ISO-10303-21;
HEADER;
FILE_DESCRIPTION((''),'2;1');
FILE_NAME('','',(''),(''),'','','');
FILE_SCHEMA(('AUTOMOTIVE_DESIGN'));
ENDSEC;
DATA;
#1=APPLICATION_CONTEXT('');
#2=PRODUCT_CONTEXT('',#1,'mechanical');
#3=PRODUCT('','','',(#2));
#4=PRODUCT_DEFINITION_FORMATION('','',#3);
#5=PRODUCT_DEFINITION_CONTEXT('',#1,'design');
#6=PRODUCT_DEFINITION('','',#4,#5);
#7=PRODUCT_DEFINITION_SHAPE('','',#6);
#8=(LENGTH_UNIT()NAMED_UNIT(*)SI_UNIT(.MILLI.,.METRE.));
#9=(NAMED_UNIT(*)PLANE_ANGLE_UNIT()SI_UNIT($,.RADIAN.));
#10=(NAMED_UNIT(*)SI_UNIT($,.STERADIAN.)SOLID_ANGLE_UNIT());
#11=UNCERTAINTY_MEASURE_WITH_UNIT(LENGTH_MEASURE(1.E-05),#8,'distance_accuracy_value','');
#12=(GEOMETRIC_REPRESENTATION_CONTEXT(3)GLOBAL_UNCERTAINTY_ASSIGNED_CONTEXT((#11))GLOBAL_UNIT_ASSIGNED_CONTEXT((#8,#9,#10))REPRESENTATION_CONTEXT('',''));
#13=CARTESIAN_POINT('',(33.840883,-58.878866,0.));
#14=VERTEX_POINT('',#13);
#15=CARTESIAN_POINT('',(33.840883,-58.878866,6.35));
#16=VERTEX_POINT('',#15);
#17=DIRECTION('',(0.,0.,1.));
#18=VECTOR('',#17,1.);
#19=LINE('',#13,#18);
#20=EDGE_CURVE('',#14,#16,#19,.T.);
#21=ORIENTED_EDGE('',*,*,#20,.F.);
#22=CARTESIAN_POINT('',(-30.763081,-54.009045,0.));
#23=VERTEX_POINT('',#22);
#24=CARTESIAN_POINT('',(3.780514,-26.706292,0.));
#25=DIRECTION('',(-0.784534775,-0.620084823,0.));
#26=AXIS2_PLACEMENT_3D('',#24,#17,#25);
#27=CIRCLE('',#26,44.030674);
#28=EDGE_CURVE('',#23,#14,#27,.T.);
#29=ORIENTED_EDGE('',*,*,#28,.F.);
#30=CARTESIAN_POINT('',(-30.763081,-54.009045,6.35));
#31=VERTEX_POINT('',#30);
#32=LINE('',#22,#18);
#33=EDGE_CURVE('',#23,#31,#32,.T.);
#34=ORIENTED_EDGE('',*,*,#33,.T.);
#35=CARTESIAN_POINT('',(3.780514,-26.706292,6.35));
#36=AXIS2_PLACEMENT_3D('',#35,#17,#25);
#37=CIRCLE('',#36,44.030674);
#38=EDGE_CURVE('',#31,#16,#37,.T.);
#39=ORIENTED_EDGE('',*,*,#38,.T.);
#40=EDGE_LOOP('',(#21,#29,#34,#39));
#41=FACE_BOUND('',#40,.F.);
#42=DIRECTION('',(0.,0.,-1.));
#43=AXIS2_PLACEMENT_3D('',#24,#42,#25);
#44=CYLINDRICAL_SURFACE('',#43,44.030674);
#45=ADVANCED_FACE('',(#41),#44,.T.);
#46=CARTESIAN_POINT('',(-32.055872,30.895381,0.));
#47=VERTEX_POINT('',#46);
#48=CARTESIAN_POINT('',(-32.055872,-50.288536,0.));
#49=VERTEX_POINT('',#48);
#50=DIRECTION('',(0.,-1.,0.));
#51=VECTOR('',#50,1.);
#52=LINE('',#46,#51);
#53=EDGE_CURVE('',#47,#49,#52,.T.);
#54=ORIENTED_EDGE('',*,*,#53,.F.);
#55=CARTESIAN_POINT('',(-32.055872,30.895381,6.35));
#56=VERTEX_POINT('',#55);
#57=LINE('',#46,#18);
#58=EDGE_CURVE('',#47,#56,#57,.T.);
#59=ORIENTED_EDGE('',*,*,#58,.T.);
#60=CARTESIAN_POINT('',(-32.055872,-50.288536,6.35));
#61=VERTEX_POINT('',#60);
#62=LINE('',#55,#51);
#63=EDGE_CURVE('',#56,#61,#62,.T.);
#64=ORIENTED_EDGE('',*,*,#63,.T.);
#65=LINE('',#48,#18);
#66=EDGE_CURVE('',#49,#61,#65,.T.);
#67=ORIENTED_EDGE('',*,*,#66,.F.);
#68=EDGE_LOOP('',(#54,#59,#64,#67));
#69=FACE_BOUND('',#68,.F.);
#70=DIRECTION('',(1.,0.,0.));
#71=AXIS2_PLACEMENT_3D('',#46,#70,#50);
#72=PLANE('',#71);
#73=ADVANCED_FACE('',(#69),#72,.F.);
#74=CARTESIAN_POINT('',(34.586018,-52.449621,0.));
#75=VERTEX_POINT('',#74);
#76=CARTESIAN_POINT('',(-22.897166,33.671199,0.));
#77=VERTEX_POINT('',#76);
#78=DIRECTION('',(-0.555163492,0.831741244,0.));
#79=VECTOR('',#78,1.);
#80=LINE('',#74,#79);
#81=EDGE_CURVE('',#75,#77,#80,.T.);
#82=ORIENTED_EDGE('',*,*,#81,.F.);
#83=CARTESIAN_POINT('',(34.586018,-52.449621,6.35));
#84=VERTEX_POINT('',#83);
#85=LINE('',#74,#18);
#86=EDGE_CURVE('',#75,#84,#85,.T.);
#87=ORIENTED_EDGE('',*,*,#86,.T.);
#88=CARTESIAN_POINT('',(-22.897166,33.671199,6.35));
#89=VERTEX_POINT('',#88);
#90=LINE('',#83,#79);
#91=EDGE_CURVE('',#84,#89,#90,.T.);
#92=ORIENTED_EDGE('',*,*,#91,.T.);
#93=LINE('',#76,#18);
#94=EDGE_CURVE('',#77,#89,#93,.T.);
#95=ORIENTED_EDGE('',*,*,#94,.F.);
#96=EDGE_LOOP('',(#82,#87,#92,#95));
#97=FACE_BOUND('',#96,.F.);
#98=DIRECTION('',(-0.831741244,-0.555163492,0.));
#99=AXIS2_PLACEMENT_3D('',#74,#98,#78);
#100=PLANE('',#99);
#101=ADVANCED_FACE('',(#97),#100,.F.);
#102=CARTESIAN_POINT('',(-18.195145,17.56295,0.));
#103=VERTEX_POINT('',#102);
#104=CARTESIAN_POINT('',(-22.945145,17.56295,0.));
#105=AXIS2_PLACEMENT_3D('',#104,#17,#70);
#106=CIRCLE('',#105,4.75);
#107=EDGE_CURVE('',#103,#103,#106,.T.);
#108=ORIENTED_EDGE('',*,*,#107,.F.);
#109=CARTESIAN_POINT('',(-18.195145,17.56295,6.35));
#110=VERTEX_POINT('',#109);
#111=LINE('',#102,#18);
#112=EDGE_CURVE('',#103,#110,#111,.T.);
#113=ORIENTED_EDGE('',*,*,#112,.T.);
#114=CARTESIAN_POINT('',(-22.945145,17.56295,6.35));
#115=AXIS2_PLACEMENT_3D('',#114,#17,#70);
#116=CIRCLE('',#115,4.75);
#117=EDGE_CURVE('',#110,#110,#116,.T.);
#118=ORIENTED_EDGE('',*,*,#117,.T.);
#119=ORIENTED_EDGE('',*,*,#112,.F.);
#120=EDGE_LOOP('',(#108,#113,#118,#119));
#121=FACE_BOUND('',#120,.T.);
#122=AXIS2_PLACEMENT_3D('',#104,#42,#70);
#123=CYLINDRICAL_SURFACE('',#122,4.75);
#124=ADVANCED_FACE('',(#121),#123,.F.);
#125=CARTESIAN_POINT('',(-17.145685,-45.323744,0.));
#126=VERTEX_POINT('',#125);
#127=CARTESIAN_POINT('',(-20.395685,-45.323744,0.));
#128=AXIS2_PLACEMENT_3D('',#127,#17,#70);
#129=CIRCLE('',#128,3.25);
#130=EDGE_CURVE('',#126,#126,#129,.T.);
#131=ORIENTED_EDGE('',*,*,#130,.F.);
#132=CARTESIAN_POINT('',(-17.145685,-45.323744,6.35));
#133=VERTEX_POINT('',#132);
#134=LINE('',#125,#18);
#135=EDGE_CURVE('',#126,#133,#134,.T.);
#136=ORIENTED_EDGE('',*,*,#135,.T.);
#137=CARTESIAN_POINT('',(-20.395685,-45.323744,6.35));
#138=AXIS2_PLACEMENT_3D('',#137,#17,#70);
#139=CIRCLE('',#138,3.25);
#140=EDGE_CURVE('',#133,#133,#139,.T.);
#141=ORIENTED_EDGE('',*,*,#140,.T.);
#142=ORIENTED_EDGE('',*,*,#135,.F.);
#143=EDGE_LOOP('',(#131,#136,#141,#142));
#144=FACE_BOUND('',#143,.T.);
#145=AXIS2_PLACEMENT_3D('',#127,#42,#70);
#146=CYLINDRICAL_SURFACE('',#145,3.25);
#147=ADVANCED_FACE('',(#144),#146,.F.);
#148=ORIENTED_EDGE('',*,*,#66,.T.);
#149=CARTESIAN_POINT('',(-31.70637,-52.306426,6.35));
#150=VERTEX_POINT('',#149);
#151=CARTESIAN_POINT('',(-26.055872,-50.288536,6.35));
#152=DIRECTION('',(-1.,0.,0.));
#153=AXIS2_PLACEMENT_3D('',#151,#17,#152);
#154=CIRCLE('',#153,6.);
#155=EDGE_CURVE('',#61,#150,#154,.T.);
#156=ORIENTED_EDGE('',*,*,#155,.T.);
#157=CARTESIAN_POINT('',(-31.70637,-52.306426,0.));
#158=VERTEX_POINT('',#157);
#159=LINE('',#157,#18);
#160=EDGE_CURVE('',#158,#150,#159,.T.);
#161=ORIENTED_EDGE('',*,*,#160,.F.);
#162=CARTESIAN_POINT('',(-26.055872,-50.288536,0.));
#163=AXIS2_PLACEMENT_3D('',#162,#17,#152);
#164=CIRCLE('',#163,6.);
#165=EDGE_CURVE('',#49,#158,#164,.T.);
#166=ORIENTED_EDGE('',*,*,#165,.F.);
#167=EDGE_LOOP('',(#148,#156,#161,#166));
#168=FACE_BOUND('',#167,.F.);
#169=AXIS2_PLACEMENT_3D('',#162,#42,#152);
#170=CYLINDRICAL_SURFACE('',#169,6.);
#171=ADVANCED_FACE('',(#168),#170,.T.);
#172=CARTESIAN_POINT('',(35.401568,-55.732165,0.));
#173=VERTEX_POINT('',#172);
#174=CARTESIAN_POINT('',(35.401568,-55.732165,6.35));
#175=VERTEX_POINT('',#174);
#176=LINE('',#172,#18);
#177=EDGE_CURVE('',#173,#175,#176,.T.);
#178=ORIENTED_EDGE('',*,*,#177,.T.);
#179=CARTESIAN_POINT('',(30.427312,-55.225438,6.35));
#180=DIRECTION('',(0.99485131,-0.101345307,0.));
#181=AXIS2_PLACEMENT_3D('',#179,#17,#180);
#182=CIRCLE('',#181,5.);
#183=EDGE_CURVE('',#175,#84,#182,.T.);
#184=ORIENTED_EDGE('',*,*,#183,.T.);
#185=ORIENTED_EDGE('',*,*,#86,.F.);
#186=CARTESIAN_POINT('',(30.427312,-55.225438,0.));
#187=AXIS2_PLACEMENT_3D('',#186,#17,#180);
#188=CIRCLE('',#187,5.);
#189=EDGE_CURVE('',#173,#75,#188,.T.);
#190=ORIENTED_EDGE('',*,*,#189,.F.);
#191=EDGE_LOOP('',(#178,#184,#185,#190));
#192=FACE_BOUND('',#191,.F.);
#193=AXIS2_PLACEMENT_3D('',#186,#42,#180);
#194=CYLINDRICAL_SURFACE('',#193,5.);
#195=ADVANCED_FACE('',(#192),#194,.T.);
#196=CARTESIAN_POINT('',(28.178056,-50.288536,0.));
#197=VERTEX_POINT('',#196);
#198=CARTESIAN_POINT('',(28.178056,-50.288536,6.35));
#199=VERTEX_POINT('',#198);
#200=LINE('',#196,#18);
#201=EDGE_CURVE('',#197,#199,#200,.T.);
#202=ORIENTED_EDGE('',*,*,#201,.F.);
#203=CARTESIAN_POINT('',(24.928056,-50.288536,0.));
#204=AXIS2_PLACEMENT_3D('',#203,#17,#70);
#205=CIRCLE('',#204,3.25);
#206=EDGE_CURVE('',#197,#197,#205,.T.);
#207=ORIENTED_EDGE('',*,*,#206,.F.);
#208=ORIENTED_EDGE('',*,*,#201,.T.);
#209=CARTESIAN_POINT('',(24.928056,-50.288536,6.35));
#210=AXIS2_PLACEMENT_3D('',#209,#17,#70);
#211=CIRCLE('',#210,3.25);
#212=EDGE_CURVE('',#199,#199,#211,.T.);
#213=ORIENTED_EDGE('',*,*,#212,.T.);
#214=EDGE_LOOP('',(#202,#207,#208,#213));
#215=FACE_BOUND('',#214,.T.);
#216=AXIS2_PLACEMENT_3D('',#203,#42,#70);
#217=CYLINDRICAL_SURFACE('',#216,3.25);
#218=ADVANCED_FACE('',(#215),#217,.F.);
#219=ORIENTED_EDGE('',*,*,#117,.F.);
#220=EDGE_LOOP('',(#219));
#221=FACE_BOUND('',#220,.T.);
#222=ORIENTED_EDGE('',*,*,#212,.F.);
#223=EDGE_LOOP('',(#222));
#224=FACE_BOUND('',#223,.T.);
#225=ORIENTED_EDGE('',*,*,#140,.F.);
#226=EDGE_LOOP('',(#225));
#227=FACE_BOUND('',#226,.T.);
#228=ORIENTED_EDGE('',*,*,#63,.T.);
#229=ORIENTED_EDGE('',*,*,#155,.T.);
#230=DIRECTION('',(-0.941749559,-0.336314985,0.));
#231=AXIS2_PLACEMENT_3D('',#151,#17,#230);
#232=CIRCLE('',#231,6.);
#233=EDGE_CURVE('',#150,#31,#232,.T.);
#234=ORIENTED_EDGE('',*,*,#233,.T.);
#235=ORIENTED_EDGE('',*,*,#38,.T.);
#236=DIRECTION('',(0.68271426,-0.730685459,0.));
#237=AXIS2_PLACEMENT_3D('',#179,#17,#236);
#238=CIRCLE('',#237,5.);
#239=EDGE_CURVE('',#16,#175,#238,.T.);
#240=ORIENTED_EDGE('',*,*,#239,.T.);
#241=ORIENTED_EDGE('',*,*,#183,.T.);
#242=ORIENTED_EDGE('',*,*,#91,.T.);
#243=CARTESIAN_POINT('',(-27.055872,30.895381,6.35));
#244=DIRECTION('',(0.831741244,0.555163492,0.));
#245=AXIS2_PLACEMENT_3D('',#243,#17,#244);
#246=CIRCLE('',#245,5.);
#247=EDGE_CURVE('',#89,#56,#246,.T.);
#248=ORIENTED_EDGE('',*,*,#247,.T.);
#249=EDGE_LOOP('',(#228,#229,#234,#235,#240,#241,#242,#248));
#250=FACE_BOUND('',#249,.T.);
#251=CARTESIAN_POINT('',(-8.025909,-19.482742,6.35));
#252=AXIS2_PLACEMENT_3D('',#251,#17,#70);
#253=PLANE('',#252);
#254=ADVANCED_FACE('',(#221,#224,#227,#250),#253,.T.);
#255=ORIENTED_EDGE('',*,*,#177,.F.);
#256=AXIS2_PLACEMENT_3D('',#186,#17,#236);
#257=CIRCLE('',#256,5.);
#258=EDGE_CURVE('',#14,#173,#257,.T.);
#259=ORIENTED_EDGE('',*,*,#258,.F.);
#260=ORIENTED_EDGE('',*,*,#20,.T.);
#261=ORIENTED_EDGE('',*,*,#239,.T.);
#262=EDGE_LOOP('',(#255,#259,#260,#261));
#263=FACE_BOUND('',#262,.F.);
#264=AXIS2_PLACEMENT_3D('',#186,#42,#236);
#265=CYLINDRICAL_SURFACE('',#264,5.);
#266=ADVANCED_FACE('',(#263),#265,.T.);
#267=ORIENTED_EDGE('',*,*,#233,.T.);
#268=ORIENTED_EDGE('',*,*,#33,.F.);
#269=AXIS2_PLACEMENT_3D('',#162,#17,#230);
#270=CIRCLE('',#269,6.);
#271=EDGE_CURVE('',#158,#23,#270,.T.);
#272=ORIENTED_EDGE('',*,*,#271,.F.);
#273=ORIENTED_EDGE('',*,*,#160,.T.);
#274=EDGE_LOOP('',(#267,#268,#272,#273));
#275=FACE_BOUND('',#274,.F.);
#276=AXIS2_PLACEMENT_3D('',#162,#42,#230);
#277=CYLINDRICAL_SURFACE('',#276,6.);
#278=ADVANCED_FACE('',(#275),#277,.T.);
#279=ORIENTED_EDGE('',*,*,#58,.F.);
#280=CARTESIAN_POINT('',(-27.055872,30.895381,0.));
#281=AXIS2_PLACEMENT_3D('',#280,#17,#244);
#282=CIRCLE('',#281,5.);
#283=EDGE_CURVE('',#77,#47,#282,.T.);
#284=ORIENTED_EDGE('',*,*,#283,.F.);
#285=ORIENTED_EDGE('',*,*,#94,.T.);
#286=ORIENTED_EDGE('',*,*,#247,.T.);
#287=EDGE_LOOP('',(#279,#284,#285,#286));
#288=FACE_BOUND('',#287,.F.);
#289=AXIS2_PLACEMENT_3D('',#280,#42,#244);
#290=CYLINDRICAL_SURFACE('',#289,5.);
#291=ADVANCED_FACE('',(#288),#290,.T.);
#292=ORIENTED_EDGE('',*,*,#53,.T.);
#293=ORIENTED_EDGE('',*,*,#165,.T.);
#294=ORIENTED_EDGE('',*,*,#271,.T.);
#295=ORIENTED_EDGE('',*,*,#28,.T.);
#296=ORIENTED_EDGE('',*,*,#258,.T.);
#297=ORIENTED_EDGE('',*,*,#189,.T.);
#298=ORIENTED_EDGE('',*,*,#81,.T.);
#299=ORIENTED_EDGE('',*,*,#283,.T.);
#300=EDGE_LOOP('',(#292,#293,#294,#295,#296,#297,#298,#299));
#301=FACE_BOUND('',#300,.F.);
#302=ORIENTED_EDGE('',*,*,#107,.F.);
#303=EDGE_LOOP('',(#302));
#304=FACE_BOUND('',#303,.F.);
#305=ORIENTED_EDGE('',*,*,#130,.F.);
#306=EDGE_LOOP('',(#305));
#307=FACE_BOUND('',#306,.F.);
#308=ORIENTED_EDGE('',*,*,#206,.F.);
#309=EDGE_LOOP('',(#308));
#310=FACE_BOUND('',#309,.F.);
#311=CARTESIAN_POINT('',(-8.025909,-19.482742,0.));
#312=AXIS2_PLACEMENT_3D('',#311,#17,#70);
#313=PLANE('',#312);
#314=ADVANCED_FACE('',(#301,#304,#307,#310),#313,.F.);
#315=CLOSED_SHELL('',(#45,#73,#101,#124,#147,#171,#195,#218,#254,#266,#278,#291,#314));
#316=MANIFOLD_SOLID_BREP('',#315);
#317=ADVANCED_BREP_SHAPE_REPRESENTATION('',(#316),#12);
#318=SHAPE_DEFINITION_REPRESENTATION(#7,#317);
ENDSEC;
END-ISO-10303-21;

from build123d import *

# Parameters (mm, degrees)
F0_R     = 3.25
F0_R_2   = 4.75
F1_DEPTH = 6.35


# Not quite as in the source:
# - a length typed as a fraction of an inch, garbled in the dataset ("3 / 203.2 mm" for 3/8 in), is restored


with BuildPart() as f1:
    # F0 (on Top) → F1 (new body)
    with BuildSketch(Plane.XY):
        with BuildLine():
            ThreePointArc((-22.8971660057, 33.6711986684), (-28.5061254625, 35.6804376948), (-32.0558722278, 30.8953812108))
            Line((-32.0558722278, 30.8953812108), (-32.0558722278, -50.2885361405))
            ThreePointArc((-32.0558722278, -50.2885361405), (-31.9678509198, -51.3125029104), (-31.7063695792, -52.3064260488))
            Line((-31.7063695792, -52.3064260488), (35.4015681706, -55.732164864))
            ThreePointArc((35.4015681706, -55.732164864), (35.2797878973, -54.0198372397), (34.5860178433, -52.4496208725))
            Line((34.5860178433, -52.4496208725), (-22.8971660057, 33.6711986684))
        make_face()
        with Locations((-20.3956849873, -45.3237444162)):
            Circle(F0_R, mode=Mode.SUBTRACT)
        with Locations((24.9280557036, -50.2885361405)):
            Circle(F0_R, mode=Mode.SUBTRACT)
        with Locations((-22.9451451451, 17.56295003)):
            Circle(F0_R_2, mode=Mode.SUBTRACT)
        with BuildLine():
            Line((35.4015681706, -55.732164864), (-31.7063695792, -52.3064260488))
            ThreePointArc((-31.7063695792, -52.3064260488), (-31.3042287593, -53.1962420607), (-30.763080876, -54.0090450764))
            ThreePointArc((-30.763080876, -54.0090450764), (0.4708891197, -70.6124039736), (33.840882919, -58.8788656243))
            ThreePointArc((33.840882919, -58.8788656243), (34.9066358356, -57.4470716441), (35.4015681706, -55.732164864))
        make_face()
    extrude(amount=F1_DEPTH)


solid = f1.part
